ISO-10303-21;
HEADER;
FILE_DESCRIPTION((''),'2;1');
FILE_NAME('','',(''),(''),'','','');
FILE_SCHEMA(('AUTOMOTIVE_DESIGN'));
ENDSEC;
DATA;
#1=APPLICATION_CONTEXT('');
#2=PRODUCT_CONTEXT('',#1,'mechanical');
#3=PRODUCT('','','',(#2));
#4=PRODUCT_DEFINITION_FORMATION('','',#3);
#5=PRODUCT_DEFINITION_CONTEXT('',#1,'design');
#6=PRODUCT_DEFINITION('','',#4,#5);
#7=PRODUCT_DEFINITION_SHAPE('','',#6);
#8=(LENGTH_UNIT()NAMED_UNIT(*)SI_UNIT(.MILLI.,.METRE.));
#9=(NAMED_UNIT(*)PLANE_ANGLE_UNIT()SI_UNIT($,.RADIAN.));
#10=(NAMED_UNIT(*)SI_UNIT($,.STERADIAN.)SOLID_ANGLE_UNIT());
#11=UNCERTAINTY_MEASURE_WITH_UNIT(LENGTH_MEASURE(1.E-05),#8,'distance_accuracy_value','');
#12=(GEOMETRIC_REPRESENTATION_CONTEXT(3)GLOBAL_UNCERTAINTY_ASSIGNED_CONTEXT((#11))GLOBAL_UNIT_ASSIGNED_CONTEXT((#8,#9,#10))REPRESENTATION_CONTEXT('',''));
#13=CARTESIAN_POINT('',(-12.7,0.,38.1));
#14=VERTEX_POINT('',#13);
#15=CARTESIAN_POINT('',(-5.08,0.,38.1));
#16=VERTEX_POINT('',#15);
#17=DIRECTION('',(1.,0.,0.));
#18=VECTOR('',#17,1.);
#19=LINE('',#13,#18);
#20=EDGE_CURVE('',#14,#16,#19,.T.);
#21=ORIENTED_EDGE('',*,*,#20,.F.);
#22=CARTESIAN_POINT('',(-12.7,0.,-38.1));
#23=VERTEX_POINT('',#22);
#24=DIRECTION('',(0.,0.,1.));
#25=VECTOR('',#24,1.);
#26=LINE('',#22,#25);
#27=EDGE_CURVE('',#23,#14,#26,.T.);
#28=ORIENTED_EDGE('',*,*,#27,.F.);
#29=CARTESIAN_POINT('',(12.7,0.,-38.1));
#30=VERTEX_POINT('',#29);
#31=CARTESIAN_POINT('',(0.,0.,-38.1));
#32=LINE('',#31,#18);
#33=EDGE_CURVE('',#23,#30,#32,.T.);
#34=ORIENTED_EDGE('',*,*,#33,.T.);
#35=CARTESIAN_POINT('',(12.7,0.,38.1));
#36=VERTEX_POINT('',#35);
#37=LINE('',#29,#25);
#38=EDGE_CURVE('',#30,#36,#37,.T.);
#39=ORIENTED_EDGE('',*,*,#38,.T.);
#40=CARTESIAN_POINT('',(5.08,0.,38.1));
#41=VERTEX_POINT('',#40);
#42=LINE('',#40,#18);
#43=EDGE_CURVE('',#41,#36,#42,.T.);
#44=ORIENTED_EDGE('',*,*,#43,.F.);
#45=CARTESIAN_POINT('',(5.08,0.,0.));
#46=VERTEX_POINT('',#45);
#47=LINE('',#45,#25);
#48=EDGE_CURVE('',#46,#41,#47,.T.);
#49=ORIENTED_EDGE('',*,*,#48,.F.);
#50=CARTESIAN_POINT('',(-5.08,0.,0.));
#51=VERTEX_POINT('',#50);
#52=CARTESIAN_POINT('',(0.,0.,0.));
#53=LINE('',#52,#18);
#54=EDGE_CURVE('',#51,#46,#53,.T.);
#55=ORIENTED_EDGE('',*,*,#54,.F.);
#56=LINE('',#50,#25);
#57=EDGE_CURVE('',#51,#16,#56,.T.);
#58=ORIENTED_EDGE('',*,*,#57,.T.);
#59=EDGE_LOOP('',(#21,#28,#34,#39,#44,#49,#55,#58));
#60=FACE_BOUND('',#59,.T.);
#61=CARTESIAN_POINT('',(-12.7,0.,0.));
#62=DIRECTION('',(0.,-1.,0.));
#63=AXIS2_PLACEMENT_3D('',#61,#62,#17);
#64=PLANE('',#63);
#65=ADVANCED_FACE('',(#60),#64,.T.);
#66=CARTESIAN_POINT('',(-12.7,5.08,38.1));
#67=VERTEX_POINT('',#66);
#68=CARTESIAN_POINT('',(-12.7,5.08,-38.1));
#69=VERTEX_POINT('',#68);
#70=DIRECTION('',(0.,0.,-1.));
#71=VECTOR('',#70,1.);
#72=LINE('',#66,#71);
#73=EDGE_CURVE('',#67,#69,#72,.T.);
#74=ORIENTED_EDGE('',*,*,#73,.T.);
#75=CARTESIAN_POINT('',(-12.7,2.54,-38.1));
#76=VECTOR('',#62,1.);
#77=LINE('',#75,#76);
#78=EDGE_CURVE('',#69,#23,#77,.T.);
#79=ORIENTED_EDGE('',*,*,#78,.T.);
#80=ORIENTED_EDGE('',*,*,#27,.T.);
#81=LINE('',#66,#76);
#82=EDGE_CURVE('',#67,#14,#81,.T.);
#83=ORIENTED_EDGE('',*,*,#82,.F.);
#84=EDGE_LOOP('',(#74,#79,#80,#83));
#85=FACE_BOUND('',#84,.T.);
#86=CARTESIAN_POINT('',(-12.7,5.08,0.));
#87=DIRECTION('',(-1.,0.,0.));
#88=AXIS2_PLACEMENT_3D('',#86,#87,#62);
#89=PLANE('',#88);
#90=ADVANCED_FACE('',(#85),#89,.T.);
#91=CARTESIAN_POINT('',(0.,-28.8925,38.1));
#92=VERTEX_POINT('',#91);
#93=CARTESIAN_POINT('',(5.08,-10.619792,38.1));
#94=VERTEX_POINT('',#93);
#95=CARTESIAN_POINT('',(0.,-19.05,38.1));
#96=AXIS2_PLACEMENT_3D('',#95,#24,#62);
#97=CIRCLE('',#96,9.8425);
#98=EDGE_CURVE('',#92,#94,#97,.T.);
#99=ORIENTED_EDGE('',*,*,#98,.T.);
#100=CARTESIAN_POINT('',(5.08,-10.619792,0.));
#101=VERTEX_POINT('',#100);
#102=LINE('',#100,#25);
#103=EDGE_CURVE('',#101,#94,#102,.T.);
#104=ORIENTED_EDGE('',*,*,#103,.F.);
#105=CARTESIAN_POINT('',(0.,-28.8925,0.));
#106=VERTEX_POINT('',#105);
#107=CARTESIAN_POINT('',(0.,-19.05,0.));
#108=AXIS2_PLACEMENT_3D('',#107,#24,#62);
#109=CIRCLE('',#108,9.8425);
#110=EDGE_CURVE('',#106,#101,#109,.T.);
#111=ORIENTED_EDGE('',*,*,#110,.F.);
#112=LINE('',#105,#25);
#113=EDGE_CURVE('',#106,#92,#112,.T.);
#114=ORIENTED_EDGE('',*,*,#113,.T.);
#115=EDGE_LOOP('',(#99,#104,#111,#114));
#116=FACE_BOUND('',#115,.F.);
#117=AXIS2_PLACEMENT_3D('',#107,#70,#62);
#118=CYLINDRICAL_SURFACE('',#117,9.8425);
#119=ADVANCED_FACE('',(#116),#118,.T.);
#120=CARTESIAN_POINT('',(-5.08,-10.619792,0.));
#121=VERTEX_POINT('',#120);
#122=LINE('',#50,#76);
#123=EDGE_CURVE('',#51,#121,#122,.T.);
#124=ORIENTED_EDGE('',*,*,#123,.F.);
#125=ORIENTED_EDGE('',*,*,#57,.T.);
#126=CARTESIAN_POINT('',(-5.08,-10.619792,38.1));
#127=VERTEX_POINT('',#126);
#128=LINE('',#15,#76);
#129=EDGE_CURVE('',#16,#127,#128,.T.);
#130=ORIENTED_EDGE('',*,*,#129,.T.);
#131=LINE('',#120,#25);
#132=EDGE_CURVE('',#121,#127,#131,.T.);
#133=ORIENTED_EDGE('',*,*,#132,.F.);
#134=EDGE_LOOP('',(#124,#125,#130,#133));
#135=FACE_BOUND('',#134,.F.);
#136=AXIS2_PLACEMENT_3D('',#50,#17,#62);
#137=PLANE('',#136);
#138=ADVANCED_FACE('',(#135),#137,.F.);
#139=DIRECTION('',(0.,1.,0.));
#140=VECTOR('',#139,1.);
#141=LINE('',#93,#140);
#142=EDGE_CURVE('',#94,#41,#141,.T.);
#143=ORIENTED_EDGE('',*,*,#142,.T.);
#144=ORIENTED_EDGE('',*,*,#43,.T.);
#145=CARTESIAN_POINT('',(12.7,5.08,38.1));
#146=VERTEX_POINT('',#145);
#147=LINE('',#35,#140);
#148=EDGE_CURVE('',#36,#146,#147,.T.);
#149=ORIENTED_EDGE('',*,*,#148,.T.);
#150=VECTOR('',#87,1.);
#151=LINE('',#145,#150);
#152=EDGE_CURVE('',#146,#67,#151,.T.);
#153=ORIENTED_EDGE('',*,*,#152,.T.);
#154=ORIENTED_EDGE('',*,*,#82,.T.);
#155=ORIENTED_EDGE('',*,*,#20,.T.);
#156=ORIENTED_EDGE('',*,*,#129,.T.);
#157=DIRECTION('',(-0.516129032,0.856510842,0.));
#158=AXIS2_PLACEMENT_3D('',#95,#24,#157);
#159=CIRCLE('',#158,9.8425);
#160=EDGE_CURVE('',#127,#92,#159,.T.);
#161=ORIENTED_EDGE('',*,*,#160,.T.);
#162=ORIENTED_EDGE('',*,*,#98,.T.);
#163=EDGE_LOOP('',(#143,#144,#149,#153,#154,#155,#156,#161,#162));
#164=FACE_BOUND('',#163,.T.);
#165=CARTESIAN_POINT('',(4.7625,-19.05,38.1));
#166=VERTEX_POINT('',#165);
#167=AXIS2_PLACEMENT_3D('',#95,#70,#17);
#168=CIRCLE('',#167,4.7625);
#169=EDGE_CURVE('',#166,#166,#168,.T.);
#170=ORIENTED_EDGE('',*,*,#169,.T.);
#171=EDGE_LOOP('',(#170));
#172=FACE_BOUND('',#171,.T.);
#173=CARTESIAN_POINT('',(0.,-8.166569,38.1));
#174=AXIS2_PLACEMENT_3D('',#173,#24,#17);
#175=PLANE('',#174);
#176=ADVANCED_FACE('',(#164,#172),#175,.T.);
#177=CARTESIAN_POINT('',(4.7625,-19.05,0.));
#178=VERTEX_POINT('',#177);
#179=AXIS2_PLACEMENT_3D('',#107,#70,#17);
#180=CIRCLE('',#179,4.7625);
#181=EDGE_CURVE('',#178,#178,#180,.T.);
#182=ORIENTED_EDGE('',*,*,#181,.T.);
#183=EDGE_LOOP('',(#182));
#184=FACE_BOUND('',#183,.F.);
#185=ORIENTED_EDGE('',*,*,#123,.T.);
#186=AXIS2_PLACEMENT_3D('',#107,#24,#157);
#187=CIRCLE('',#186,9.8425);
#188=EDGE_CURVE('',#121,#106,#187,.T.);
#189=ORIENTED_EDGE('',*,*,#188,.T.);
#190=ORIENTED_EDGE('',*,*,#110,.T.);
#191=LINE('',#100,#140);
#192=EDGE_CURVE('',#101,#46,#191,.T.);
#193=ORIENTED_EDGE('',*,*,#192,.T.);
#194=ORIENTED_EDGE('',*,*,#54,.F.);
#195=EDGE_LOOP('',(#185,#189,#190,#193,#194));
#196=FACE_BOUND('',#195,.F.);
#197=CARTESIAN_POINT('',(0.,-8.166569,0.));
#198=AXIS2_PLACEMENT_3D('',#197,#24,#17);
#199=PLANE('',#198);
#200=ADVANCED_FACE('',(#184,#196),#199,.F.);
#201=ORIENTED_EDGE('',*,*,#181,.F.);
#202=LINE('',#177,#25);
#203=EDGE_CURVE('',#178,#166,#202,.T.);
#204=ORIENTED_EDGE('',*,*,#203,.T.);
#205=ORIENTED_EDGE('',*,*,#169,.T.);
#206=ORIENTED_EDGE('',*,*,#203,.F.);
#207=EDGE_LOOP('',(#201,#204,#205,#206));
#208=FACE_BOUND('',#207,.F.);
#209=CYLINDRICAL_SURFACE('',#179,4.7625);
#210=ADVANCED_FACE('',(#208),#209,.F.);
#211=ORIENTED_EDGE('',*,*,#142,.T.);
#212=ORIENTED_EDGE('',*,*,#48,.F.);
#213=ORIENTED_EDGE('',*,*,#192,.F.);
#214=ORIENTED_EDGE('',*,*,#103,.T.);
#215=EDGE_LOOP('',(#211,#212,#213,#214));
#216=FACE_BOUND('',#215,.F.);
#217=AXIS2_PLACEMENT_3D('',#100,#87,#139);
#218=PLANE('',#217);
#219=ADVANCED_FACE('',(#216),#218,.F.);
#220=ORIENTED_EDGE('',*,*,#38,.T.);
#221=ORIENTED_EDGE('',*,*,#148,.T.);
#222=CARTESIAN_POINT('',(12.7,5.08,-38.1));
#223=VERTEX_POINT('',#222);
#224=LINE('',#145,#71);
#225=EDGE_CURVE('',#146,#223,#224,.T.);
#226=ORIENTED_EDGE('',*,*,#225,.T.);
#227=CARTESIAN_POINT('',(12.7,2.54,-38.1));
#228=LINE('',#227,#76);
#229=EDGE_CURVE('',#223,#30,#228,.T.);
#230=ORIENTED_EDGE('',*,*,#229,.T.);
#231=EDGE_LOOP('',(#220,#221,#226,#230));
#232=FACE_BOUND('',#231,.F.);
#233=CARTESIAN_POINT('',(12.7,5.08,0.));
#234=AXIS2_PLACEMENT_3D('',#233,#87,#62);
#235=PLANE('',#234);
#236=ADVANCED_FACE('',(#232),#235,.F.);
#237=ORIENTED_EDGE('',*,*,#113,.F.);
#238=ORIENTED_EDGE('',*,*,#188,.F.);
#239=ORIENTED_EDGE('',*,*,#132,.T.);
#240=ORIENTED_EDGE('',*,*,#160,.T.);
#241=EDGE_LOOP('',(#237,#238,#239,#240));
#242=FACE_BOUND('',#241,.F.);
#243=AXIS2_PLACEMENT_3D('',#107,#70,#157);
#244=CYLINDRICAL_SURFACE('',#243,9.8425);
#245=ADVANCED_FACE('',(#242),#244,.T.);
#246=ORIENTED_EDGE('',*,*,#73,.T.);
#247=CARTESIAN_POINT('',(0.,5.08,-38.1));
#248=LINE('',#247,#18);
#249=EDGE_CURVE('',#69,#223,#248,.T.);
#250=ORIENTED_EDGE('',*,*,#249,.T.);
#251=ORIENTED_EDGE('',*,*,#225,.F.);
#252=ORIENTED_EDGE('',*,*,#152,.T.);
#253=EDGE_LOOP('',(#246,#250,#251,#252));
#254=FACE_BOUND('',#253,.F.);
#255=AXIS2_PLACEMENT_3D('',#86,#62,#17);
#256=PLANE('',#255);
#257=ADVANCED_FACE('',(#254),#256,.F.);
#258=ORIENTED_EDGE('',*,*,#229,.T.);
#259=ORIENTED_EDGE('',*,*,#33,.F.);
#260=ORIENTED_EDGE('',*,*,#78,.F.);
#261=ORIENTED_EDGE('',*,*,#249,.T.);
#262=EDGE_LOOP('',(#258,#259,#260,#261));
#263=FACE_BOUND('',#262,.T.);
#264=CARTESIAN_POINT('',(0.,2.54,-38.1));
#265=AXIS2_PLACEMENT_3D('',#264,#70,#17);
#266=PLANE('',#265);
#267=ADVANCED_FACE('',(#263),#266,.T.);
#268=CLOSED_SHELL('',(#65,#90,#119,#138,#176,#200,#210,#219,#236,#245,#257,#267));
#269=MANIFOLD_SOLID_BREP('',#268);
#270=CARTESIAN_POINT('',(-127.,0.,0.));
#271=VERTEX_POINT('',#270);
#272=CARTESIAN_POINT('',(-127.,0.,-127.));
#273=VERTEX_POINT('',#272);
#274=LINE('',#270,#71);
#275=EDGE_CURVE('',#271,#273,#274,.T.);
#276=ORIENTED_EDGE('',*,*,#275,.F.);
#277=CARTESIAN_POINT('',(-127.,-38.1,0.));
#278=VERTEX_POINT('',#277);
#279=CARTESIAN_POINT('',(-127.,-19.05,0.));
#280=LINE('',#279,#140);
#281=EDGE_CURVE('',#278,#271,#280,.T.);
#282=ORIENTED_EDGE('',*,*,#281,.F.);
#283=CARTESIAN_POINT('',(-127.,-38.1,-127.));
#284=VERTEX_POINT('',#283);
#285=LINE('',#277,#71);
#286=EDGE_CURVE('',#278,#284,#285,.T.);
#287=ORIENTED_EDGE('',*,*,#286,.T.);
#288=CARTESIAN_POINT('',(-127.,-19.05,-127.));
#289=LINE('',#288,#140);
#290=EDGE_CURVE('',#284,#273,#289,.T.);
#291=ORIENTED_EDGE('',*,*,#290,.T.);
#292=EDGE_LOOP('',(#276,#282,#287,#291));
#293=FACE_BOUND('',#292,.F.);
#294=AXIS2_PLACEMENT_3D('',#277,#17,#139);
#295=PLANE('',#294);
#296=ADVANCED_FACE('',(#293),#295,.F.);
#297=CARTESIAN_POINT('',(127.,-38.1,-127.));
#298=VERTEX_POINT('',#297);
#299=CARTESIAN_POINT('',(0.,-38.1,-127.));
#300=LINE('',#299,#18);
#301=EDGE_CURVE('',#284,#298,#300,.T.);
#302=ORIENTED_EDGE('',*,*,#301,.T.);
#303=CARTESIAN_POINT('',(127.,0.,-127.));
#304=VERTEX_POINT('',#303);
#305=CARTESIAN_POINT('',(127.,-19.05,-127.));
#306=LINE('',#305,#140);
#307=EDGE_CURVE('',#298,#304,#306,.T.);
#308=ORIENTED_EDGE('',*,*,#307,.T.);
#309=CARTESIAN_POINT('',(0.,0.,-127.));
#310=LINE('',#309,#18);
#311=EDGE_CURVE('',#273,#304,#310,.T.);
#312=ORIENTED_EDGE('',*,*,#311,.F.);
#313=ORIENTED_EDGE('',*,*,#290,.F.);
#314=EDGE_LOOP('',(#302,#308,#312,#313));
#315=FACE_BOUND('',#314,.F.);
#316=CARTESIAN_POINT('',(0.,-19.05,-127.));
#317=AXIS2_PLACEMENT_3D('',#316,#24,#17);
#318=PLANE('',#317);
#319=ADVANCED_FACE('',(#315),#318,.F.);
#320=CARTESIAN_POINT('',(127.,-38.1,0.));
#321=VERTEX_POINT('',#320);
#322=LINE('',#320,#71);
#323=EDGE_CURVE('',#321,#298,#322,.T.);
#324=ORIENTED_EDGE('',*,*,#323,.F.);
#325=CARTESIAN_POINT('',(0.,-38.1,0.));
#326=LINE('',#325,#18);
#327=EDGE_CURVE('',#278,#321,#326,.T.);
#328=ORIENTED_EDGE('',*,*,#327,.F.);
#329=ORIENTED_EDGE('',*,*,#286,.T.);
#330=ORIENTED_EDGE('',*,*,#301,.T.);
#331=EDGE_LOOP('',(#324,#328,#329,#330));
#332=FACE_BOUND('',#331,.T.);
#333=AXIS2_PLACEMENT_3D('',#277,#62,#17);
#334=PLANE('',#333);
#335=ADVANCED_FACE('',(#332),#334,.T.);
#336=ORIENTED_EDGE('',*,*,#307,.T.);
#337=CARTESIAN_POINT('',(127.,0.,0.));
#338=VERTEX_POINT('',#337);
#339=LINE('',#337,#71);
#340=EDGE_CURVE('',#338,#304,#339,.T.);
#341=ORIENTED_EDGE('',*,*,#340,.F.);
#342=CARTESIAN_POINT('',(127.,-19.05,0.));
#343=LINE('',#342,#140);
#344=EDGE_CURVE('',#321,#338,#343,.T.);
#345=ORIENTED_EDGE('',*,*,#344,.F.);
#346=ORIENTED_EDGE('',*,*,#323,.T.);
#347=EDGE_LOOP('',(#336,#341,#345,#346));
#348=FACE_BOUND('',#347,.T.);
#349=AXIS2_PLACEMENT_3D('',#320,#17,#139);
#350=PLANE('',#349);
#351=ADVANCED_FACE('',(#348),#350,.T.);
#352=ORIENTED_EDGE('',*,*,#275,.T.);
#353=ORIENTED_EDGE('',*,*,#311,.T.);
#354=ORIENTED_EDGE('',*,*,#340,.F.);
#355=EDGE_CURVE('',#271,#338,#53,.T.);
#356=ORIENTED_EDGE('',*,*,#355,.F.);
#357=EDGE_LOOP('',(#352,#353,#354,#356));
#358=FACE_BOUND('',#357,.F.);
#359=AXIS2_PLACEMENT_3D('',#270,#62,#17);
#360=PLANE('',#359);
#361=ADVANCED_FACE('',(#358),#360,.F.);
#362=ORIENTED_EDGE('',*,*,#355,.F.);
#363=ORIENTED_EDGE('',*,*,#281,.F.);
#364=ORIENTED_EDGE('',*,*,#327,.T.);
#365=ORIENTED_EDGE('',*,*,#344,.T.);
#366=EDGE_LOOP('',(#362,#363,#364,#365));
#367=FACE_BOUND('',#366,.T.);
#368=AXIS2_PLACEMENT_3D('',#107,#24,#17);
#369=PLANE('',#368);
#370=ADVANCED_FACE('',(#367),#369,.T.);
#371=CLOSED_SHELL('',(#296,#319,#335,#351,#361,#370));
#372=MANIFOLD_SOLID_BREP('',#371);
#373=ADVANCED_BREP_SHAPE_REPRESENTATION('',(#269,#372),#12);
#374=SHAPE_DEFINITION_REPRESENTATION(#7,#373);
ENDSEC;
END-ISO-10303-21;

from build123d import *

# Parameters (mm, degrees)
F0_W     = 254
F0_H     = 38.1
F1_DEPTH = 127
F3_DEPTH = 38.1
F4_W     = 25.4
F4_H     = 5.08
F5_DEPTH = 38.1


with BuildPart() as f1:
    # F0 (on Top) → F1 (new body)
    with BuildSketch(Plane.XY):
        with Locations((0, -19.05)):
            Rectangle(F0_W, F0_H)
    extrude(amount=-F1_DEPTH)


with BuildPart() as f3:
    # F2 (on Top) → F3 (new body)
    with BuildSketch(Plane.XY):
        with BuildLine():
            ThreePointArc((-5.08, -10.6197920399), (-9.4828563233, -21.686331201), (0, -28.8925))
            ThreePointArc((0, -28.8925), (9.4828563233, -21.686331201), (5.08, -10.6197920399))
            Line((5.08, -10.6197920399), (5.08, 0))
            Line((5.08, 0), (12.7, 0))
            Line((12.7, 0), (12.7, 5.08))
            Line((12.7, 5.08), (-12.7, 5.08))
            Line((-12.7, 5.08), (-12.7, 0))
            Line((-12.7, 0), (-5.08, 0))
            Line((-5.08, 0), (-5.08, -10.6197920399))
        make_face()
        with BuildLine():
            ThreePointArc((0, -14.2875), (3.3675960454, -15.6824039546), (4.7625, -19.05))
            ThreePointArc((4.7625, -19.05), (3.3675960454, -22.4175960454), (0, -23.8125))
            ThreePointArc((0, -23.8125), (-4.7625, -19.05), (0, -14.2875))
        make_face(mode=Mode.SUBTRACT)
    extrude(amount=F3_DEPTH)

    # F4 (on face) → F5 (join)
    with BuildSketch(Plane(origin=(0, 0, 0), x_dir=(1, 0, 0), z_dir=(0, 0, -1))):
        with Locations((0, -2.54)):
            Rectangle(F4_W, F4_H)
    extrude(amount=F5_DEPTH)


solid = Compound([f1.part, f3.part])
